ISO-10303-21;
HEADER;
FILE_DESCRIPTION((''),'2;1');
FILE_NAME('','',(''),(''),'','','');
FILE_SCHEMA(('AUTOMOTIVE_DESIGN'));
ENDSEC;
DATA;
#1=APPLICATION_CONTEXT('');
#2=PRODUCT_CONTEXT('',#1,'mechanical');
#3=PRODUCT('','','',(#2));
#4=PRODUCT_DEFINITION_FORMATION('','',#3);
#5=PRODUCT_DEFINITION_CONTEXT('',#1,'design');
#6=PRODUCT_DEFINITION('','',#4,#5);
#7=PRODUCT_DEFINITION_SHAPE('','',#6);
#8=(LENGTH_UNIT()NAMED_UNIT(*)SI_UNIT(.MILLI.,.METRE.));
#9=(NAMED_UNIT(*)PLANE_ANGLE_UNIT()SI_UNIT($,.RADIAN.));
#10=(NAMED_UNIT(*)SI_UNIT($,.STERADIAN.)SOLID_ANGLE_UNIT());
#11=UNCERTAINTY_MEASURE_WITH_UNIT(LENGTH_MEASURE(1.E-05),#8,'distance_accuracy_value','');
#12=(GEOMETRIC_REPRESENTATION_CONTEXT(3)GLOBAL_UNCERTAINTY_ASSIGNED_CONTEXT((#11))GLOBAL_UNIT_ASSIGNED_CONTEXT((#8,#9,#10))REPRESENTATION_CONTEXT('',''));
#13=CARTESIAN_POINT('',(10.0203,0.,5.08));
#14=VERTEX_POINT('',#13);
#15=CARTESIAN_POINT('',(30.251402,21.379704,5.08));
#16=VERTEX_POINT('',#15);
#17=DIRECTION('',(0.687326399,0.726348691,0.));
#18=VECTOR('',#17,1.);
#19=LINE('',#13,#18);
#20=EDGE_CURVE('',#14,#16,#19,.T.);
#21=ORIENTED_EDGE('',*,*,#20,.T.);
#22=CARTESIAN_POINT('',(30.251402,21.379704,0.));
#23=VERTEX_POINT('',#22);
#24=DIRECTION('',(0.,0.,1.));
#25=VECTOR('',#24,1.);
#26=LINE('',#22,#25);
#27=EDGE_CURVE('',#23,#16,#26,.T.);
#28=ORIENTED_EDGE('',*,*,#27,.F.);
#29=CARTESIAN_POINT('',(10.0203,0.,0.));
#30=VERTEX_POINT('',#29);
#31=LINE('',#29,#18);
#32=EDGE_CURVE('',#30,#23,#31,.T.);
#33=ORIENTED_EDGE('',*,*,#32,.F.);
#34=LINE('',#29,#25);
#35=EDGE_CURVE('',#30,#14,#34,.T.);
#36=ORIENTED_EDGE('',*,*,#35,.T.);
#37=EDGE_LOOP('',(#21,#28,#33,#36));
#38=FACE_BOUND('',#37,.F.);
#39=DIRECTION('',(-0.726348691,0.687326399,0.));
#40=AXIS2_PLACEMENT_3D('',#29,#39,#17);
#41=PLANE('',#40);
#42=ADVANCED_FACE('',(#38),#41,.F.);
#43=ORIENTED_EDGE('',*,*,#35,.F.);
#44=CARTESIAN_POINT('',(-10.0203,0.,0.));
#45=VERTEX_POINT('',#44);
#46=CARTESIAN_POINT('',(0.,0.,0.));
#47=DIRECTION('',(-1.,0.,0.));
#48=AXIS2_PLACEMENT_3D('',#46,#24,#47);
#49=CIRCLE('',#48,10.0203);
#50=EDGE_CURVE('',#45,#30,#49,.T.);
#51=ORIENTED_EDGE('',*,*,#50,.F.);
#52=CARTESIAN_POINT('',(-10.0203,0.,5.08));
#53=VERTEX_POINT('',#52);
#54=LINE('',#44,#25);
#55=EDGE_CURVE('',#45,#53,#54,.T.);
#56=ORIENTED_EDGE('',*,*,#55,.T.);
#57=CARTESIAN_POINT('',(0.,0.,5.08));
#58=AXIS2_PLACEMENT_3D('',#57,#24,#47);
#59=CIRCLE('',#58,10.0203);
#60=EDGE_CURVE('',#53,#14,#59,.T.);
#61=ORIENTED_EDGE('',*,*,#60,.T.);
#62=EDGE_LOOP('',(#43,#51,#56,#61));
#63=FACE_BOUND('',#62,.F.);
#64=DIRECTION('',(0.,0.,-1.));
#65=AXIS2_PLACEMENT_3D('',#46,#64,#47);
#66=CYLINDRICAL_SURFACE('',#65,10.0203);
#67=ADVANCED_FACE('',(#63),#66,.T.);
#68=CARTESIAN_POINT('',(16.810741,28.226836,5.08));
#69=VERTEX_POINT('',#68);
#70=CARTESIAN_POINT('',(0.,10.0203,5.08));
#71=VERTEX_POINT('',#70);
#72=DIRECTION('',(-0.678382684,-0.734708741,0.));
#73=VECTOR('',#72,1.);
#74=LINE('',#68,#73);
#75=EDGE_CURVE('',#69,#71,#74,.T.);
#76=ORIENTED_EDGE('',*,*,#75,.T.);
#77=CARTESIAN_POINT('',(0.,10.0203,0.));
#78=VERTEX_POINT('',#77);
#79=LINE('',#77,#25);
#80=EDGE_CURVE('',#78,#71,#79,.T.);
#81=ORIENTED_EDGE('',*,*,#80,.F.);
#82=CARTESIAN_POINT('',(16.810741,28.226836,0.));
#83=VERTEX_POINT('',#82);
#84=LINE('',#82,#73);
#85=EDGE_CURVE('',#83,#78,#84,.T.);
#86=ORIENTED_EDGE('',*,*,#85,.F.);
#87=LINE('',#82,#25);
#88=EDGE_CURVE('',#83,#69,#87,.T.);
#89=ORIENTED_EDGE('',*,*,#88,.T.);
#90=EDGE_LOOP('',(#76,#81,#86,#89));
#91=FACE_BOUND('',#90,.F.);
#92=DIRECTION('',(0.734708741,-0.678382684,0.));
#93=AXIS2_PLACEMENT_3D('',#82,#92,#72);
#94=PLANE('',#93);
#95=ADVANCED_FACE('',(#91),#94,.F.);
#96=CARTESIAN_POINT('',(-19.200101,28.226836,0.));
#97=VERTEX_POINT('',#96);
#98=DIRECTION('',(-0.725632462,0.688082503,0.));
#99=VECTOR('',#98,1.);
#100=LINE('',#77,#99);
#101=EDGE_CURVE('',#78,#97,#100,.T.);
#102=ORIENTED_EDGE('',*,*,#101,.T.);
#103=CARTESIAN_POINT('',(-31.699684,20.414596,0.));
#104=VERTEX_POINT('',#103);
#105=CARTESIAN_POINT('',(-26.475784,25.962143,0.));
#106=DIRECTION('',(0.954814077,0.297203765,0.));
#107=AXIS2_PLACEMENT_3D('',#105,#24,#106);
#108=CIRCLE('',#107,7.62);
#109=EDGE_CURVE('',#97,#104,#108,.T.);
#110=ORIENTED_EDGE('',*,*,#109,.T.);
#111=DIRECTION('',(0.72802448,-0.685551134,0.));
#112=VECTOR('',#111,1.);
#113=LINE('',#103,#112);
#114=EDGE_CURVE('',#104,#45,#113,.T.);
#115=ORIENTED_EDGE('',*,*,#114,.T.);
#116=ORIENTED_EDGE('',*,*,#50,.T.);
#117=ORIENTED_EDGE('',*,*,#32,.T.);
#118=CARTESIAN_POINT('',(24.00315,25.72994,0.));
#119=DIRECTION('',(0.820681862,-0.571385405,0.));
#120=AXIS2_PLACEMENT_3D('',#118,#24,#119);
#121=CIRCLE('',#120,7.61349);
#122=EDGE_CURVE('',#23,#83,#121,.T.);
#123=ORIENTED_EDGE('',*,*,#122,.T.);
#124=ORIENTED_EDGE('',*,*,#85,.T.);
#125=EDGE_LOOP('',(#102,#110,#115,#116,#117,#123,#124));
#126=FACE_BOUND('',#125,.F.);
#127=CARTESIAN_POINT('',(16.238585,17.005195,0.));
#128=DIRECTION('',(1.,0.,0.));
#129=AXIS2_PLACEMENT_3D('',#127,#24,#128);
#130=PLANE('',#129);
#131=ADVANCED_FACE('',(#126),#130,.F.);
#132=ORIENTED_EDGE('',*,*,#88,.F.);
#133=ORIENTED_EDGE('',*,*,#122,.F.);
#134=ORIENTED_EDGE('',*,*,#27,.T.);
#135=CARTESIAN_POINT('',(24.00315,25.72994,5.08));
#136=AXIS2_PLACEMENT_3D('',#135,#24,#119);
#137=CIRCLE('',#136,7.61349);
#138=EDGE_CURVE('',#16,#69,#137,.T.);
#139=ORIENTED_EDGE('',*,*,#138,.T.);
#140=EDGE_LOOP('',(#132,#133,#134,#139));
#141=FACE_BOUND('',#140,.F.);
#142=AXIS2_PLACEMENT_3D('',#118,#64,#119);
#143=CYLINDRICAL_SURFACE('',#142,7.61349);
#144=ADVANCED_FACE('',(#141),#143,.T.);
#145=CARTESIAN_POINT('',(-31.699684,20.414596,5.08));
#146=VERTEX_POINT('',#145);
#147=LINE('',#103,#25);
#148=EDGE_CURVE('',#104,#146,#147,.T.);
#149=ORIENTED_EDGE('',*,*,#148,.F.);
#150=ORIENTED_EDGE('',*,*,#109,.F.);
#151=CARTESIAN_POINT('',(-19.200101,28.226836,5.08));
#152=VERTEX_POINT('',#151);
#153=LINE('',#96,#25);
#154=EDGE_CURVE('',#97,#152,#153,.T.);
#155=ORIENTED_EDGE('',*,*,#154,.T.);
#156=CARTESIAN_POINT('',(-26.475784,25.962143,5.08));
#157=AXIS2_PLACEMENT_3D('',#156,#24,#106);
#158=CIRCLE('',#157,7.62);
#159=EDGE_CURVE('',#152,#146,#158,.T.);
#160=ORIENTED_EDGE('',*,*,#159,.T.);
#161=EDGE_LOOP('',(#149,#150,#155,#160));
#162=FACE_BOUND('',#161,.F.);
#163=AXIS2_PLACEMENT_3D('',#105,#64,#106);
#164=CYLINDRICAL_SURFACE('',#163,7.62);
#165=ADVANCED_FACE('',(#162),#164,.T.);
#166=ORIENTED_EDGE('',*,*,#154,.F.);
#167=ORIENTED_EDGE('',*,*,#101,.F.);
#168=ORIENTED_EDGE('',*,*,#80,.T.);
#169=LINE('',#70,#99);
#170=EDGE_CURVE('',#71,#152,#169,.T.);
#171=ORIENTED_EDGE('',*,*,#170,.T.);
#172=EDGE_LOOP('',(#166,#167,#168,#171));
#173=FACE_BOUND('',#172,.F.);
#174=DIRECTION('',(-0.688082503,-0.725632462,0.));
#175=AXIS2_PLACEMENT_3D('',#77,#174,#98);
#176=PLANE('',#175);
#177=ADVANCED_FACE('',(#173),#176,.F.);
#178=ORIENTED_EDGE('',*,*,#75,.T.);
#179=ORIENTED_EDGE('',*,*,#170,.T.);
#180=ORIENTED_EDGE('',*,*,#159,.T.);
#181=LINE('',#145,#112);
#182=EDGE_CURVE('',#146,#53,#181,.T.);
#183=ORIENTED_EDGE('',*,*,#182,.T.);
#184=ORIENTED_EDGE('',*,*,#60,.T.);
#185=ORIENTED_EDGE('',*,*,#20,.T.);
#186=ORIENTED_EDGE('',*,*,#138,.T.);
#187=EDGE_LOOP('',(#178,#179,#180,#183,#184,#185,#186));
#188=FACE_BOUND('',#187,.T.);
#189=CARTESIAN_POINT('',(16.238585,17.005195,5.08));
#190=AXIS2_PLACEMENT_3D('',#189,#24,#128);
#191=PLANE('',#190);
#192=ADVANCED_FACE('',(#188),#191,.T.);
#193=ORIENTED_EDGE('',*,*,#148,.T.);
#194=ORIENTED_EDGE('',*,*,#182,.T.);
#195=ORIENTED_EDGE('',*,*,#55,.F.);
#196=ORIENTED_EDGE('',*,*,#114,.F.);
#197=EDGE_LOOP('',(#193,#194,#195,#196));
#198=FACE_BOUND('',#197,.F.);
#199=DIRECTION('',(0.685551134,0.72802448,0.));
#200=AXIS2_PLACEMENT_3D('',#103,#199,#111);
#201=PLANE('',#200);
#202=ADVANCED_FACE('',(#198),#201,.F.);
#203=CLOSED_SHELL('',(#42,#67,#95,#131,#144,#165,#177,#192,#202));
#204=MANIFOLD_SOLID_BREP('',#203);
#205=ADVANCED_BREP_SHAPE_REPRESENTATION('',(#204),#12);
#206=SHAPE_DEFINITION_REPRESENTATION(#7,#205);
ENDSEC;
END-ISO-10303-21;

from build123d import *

# Parameters (mm, degrees)
F4_DEPTH = 5.08


# Not quite as in the source:
# - the program builds the solid bodies; features that only make, move or delete a surface that nothing else refers to are left out


with BuildPart() as f4:
    # F0 (on Top) → F4 (new body)
    with BuildSketch(Plane.XY):
        with BuildLine():
            ThreePointArc((0, 10.0203), (7.0854220795, 7.0854220795), (10.0203, 0))
            Line((10.0203, 0), (30.2514023598, 21.3797036526))
            ThreePointArc((30.2514023598, 21.3797036526), (27.4591098659, 32.5138598171), (16.8107412275, 28.2268356499))
            Line((16.8107412275, 28.2268356499), (0, 10.0203))
        make_face()
        with BuildLine():
            ThreePointArc((-10.0203, 0), (-7.0854220795, 7.0854220795), (0, 10.0203))
            Line((0, 10.0203), (-19.2001006115, 28.2268356499))
            ThreePointArc((-19.2001006115, 28.2268356499), (-30.5143757694, 32.4238900578), (-31.6996835172, 20.4145964235))
            Line((-31.6996835172, 20.4145964235), (-10.0203, 0))
        make_face()
        with BuildLine():
            ThreePointArc((-10.0203, 0), (0, -10.0203), (10.0203, 0))
            ThreePointArc((10.0203, 0), (7.0854220795, 7.0854220795), (0, 10.0203))
            ThreePointArc((0, 10.0203), (-7.0854220795, 7.0854220795), (-10.0203, 0))
        make_face()
    extrude(amount=F4_DEPTH)


solid = f4.part
